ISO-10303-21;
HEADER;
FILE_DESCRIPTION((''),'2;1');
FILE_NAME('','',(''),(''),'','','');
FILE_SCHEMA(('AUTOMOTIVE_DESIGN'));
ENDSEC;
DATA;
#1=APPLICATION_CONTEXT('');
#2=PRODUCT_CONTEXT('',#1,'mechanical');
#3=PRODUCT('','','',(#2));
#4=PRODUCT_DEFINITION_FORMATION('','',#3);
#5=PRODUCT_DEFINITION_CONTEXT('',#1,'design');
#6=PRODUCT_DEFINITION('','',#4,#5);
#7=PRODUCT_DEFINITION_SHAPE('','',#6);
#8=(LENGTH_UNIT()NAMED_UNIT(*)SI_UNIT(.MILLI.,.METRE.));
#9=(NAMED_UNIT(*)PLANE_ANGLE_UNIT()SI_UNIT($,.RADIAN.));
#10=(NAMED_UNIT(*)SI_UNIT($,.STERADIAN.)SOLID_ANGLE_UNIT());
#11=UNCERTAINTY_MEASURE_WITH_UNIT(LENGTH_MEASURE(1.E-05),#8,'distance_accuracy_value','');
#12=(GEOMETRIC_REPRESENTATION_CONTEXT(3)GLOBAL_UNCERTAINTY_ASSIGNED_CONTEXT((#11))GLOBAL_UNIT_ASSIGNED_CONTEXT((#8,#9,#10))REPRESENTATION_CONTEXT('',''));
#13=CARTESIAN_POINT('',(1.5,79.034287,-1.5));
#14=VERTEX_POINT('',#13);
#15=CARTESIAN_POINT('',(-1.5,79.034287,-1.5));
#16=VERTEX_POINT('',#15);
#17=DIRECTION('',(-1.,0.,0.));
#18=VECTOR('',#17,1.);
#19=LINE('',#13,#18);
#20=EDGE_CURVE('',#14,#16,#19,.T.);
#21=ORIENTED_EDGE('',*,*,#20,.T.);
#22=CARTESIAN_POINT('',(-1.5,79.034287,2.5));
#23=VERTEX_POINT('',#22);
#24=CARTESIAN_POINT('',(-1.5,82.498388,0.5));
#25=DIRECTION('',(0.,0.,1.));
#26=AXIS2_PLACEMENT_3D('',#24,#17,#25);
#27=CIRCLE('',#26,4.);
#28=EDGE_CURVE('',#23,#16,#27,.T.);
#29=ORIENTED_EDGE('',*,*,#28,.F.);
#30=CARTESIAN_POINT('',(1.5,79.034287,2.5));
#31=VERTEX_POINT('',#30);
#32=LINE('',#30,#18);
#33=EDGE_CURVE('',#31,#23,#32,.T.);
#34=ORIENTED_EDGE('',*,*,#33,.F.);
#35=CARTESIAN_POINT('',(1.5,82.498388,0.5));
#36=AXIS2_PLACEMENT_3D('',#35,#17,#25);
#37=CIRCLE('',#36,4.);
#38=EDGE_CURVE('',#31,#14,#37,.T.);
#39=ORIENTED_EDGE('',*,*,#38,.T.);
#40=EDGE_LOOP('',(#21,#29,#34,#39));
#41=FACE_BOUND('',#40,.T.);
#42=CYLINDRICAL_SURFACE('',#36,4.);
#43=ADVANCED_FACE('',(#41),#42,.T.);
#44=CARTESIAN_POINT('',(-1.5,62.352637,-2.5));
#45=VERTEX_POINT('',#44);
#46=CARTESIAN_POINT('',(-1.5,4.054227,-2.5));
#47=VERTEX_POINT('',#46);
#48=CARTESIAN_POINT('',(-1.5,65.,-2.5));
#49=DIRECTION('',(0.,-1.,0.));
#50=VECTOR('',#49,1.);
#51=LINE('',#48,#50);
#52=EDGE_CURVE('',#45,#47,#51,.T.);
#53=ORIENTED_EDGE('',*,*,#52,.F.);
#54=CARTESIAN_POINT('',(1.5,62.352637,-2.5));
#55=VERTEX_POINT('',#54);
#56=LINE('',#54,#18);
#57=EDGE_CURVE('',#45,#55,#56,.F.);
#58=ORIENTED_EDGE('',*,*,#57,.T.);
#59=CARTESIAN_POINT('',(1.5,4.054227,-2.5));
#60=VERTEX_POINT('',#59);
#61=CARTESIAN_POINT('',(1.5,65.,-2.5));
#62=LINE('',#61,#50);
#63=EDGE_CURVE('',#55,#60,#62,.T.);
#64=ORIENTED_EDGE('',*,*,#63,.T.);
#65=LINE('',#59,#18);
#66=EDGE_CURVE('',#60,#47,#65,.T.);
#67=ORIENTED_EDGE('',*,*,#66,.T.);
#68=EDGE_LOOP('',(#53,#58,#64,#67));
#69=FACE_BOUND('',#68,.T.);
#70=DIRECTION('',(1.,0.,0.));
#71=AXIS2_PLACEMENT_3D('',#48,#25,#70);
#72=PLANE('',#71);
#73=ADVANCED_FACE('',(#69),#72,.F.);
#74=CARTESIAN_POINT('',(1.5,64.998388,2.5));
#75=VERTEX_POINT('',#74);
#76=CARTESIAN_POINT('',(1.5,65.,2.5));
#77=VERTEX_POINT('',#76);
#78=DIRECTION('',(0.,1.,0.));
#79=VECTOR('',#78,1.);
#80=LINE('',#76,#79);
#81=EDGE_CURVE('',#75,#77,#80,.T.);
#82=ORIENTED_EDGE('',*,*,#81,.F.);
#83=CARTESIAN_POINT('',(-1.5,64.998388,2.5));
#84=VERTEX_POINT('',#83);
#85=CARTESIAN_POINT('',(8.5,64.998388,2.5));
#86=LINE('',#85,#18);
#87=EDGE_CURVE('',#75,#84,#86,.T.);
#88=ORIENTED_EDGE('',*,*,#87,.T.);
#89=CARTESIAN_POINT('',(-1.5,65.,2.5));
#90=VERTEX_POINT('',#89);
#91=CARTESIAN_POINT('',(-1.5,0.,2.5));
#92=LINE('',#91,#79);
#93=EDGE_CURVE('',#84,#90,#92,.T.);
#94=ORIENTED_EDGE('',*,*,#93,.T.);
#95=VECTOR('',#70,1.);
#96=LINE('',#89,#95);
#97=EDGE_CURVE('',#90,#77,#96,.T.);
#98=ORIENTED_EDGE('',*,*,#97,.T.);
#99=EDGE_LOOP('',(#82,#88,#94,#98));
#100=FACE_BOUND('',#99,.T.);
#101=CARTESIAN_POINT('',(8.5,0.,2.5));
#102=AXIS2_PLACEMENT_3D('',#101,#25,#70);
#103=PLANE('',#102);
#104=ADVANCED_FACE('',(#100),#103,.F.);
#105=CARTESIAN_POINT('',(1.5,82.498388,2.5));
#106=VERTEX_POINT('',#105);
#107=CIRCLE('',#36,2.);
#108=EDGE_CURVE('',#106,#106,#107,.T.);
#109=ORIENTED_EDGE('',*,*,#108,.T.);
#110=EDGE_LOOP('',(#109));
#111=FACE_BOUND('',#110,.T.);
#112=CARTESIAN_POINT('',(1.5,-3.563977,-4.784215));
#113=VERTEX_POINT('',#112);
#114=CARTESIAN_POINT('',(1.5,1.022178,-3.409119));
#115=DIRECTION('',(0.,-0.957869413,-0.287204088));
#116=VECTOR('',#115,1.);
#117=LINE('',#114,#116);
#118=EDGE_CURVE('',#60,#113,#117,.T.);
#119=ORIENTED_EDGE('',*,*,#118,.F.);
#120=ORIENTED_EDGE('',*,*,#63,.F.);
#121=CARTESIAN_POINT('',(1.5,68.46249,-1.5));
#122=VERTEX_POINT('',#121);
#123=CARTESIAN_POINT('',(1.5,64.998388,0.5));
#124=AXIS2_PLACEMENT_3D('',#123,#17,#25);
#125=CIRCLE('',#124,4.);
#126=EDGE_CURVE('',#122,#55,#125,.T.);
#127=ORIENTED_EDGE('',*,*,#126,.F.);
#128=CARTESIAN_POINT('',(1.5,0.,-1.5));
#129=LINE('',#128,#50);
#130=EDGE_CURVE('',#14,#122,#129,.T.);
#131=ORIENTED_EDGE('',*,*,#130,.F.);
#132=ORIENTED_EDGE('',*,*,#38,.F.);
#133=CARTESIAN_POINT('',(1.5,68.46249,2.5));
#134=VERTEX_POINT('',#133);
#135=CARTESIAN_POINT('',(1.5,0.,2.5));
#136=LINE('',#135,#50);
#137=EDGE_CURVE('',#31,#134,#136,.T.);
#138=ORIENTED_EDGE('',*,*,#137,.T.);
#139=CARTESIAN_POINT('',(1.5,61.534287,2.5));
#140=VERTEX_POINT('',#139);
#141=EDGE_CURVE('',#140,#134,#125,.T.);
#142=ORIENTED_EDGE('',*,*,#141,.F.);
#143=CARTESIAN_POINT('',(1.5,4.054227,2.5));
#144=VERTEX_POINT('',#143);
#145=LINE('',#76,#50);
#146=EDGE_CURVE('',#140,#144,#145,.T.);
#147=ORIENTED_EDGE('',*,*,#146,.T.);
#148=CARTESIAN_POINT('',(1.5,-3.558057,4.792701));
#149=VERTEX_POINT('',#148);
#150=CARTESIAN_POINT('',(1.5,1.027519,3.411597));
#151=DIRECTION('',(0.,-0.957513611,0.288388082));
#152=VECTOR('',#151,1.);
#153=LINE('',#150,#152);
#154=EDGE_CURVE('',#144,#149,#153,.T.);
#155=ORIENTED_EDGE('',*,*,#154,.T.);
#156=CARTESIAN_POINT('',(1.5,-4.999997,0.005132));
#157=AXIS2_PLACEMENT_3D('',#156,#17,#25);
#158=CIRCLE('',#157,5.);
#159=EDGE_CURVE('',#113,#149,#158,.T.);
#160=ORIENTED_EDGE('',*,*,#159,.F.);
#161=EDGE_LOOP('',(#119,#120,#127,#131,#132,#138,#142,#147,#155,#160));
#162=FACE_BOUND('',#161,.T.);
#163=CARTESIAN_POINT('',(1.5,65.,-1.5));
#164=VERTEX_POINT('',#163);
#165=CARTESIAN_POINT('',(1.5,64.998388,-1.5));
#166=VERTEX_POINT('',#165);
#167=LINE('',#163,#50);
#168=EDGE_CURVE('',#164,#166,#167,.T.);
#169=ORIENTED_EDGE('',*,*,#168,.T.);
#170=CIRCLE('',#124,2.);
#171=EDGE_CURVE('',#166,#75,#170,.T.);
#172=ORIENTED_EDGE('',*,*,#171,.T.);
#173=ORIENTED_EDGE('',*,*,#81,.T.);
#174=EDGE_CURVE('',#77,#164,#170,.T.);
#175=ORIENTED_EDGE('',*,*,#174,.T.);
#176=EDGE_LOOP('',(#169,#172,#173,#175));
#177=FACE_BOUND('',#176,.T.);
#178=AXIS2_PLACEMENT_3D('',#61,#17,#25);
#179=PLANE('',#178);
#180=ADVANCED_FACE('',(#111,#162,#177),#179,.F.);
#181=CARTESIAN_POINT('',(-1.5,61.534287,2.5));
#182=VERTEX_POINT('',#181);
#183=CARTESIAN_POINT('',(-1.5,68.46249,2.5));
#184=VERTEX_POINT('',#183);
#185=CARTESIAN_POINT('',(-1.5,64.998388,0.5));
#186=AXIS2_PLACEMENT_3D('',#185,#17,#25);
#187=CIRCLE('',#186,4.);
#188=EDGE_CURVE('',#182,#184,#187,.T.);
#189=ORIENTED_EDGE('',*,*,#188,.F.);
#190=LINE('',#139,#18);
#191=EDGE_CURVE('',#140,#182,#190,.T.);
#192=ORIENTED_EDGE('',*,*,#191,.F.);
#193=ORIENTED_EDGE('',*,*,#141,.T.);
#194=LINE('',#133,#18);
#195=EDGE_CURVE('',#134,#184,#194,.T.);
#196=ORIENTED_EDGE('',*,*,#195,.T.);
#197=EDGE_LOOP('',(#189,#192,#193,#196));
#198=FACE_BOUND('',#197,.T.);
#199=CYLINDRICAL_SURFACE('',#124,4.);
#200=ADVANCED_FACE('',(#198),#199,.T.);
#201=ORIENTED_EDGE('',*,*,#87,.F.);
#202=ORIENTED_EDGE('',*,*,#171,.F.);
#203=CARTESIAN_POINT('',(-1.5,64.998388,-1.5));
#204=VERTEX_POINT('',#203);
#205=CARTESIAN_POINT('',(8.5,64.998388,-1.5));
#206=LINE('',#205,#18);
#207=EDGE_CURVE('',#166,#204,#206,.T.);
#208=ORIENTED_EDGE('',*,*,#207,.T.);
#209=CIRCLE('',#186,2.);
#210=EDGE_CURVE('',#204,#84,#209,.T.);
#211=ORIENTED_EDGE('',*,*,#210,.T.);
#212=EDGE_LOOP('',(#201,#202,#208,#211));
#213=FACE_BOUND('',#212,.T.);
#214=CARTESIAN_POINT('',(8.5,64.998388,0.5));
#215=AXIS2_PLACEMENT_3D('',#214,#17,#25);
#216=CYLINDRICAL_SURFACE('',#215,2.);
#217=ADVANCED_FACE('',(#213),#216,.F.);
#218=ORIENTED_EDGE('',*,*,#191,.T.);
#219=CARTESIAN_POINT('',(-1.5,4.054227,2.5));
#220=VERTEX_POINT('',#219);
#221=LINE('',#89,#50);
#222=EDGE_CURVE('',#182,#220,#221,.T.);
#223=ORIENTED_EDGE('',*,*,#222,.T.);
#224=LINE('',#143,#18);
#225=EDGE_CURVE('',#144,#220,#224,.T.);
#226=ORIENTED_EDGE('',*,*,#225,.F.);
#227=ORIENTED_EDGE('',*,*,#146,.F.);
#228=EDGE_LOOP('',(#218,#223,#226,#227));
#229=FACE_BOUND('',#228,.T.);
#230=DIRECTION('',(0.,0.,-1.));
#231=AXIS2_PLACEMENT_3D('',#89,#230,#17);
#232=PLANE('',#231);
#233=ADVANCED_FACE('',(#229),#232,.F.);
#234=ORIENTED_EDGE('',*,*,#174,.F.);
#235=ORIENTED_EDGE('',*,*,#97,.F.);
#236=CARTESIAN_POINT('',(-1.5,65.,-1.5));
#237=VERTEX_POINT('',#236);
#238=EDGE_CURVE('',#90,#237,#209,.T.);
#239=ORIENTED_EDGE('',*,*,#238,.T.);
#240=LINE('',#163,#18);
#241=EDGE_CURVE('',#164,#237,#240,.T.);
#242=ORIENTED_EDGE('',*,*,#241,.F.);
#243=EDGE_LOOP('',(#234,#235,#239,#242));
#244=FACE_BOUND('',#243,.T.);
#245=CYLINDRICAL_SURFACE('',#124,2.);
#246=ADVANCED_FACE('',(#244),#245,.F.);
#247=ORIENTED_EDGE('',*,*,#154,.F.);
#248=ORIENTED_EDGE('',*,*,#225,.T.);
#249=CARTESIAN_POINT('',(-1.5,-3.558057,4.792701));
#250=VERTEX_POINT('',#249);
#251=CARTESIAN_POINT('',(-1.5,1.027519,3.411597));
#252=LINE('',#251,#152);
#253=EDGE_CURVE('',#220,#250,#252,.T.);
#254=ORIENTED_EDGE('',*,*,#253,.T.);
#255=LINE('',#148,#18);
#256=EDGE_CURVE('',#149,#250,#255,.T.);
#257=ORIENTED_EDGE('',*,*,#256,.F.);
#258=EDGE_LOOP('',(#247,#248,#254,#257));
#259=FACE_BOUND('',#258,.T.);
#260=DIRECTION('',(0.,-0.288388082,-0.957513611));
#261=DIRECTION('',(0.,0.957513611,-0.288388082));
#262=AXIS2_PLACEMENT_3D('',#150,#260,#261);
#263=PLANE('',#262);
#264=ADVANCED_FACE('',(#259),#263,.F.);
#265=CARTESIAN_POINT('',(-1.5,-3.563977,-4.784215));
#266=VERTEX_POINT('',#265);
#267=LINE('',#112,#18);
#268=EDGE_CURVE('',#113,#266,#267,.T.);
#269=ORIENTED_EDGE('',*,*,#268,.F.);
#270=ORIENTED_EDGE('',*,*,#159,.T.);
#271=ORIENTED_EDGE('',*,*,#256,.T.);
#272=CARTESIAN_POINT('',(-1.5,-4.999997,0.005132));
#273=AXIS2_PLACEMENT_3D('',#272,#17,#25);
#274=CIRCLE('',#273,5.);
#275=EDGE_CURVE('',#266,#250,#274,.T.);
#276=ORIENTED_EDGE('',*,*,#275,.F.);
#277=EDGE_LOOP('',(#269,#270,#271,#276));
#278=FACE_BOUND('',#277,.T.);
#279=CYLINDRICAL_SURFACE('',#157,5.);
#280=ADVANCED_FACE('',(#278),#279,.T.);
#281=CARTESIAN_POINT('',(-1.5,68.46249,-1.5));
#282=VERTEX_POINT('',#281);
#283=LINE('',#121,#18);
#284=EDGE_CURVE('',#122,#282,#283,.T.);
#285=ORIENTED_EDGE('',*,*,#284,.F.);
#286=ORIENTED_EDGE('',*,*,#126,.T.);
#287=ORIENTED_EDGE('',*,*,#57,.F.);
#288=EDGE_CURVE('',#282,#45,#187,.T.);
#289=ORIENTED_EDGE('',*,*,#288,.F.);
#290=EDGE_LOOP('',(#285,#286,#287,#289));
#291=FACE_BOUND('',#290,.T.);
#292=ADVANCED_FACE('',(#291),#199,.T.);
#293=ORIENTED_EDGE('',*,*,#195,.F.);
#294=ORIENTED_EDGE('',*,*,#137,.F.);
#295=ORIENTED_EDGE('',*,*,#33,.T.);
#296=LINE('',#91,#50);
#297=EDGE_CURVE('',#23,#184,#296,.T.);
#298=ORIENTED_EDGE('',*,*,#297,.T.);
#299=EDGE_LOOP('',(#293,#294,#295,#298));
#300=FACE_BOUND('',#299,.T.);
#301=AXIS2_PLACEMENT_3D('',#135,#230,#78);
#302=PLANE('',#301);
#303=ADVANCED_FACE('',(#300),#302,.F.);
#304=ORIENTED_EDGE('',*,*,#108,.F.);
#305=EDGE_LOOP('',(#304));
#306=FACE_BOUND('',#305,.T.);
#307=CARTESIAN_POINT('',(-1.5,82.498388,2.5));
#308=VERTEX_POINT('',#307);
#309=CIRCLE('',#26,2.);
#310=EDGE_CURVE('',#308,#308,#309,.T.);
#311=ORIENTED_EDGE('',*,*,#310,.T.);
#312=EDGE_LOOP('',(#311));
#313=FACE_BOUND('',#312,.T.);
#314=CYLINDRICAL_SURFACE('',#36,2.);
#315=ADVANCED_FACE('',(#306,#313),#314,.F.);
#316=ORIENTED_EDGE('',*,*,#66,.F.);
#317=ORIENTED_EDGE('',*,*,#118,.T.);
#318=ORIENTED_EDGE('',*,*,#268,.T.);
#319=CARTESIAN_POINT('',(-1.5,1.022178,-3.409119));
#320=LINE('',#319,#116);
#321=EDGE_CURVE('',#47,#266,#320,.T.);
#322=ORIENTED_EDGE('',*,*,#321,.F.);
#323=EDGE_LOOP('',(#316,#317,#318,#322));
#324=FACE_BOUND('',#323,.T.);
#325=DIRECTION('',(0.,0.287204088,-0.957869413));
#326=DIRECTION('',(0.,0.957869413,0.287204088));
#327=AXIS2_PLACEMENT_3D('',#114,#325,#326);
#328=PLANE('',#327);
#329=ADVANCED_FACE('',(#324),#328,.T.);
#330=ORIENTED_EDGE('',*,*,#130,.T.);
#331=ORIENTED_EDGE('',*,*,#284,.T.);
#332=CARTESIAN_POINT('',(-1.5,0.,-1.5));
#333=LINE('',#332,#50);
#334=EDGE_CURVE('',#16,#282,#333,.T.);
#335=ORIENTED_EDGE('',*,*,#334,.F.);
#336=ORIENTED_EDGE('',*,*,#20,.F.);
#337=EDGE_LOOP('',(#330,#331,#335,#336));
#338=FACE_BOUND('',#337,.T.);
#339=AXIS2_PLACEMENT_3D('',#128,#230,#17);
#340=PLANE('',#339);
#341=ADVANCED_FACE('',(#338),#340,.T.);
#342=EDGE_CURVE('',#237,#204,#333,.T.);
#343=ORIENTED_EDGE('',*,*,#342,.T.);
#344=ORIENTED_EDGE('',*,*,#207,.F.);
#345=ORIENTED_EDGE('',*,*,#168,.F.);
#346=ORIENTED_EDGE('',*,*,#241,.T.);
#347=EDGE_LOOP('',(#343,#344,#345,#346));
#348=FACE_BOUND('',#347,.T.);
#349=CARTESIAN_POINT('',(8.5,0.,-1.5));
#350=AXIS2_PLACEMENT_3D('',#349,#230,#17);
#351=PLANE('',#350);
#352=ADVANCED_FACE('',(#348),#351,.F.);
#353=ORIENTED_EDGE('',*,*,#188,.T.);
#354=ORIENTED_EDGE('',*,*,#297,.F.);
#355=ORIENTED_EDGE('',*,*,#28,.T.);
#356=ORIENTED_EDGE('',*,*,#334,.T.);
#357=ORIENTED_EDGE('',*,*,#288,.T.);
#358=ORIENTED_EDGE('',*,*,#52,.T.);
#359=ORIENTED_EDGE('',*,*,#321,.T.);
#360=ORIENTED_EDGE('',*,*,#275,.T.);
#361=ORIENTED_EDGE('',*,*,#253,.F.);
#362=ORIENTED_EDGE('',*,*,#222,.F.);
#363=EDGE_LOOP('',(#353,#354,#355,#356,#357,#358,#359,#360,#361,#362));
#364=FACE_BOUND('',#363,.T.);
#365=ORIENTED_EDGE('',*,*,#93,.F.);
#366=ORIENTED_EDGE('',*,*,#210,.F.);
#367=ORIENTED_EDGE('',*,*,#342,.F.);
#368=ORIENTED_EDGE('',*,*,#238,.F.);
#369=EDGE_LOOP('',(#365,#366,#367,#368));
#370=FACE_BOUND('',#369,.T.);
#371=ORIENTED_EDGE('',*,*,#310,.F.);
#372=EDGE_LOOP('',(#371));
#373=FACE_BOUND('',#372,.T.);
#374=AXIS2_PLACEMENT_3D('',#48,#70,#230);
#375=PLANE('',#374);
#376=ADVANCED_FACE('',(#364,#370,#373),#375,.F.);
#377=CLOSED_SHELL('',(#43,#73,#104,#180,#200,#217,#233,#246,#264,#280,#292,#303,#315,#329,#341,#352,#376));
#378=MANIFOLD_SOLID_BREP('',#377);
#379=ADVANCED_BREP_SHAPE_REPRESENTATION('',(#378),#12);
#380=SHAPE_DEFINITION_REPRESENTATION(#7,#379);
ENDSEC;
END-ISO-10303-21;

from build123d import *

# Parameters (mm, degrees)
ESQUISSE1_W         = 3
ESQUISSE1_H         = 5
BOSS_EXTRU_1_DEPTH  = 65
BOSS_EXTRUDE1_START = -3
BOSS_EXTRUDE1_DEPTH = 3
ESQUISSE3_R         = 2
BOSS_EXTRUDE3_DEPTH = 3
ESQUISSE3_10_R      = 2
CUT_EXTRUDE2_DEPTH  = 10


# Read off the part's stored shape, not the designer's step: Boss-Extrude1
with BuildPart() as part:
    # Esquisse1 → Boss.-Extru.1 (new body)
    with BuildSketch(Plane(origin=(0, 0, 0), x_dir=(1, 0, 0), z_dir=(0, 1, 0))):
        Rectangle(ESQUISSE1_W, ESQUISSE1_H)
    extrude(amount=BOSS_EXTRU_1_DEPTH)

    # Boss-Extrude1 outline → Boss-Extrude1 (add)
    with BuildSketch(Plane.ZY.offset(1.5).offset(BOSS_EXTRUDE1_START)):
        with BuildLine():
            Line((4.792700519, -3.558056958), (2.5, 4.054226947))
            Line((2.5, 4.054226947), (2.5, 0))
            Line((2.5, 0), (-2.5, 0))
            Line((-2.5, 0), (-2.5, 4.054226947))
            Line((-2.5, 4.054226947), (-4.784214598, -3.563976926))
            ThreePointArc((-4.784214598, -3.563976926), (0.008223214, -9.999996411), (4.792700519, -3.558056958))
        make_face()
    extrude(amount=BOSS_EXTRUDE1_DEPTH)

    # Esquisse3 → Boss-Extrude3 (add, through all)
    with BuildSketch(Plane.ZY.offset(1.5)):
        with BuildLine():
            ThreePointArc((2.5, 79.034286522), (0.5, 86.498388137), (-1.5, 79.034286522))
            Line((-1.5, 79.034286522), (-1.5, 68.462489753))
            ThreePointArc((-1.5, 68.462489753), (0.5, 60.998388137), (2.5, 68.462489753))
            Line((2.5, 68.462489753), (2.5, 79.034286522))
        make_face()
        with Locations((0.5, 82.498388137)):
            Circle(ESQUISSE3_R, mode=Mode.SUBTRACT)
        with Locations((0.5, 64.998388137)):
            Circle(ESQUISSE3_R, mode=Mode.SUBTRACT)
    extrude(amount=-BOSS_EXTRUDE3_DEPTH)

    # Esquisse3<10> → Cut-Extrude2 (cut)
    with BuildSketch(Plane.ZY.offset(1.5)):
        with Locations((0.5, 64.998388137)):
            Circle(ESQUISSE3_10_R)
    extrude(amount=-CUT_EXTRUDE2_DEPTH, mode=Mode.SUBTRACT)


solid = part.part
